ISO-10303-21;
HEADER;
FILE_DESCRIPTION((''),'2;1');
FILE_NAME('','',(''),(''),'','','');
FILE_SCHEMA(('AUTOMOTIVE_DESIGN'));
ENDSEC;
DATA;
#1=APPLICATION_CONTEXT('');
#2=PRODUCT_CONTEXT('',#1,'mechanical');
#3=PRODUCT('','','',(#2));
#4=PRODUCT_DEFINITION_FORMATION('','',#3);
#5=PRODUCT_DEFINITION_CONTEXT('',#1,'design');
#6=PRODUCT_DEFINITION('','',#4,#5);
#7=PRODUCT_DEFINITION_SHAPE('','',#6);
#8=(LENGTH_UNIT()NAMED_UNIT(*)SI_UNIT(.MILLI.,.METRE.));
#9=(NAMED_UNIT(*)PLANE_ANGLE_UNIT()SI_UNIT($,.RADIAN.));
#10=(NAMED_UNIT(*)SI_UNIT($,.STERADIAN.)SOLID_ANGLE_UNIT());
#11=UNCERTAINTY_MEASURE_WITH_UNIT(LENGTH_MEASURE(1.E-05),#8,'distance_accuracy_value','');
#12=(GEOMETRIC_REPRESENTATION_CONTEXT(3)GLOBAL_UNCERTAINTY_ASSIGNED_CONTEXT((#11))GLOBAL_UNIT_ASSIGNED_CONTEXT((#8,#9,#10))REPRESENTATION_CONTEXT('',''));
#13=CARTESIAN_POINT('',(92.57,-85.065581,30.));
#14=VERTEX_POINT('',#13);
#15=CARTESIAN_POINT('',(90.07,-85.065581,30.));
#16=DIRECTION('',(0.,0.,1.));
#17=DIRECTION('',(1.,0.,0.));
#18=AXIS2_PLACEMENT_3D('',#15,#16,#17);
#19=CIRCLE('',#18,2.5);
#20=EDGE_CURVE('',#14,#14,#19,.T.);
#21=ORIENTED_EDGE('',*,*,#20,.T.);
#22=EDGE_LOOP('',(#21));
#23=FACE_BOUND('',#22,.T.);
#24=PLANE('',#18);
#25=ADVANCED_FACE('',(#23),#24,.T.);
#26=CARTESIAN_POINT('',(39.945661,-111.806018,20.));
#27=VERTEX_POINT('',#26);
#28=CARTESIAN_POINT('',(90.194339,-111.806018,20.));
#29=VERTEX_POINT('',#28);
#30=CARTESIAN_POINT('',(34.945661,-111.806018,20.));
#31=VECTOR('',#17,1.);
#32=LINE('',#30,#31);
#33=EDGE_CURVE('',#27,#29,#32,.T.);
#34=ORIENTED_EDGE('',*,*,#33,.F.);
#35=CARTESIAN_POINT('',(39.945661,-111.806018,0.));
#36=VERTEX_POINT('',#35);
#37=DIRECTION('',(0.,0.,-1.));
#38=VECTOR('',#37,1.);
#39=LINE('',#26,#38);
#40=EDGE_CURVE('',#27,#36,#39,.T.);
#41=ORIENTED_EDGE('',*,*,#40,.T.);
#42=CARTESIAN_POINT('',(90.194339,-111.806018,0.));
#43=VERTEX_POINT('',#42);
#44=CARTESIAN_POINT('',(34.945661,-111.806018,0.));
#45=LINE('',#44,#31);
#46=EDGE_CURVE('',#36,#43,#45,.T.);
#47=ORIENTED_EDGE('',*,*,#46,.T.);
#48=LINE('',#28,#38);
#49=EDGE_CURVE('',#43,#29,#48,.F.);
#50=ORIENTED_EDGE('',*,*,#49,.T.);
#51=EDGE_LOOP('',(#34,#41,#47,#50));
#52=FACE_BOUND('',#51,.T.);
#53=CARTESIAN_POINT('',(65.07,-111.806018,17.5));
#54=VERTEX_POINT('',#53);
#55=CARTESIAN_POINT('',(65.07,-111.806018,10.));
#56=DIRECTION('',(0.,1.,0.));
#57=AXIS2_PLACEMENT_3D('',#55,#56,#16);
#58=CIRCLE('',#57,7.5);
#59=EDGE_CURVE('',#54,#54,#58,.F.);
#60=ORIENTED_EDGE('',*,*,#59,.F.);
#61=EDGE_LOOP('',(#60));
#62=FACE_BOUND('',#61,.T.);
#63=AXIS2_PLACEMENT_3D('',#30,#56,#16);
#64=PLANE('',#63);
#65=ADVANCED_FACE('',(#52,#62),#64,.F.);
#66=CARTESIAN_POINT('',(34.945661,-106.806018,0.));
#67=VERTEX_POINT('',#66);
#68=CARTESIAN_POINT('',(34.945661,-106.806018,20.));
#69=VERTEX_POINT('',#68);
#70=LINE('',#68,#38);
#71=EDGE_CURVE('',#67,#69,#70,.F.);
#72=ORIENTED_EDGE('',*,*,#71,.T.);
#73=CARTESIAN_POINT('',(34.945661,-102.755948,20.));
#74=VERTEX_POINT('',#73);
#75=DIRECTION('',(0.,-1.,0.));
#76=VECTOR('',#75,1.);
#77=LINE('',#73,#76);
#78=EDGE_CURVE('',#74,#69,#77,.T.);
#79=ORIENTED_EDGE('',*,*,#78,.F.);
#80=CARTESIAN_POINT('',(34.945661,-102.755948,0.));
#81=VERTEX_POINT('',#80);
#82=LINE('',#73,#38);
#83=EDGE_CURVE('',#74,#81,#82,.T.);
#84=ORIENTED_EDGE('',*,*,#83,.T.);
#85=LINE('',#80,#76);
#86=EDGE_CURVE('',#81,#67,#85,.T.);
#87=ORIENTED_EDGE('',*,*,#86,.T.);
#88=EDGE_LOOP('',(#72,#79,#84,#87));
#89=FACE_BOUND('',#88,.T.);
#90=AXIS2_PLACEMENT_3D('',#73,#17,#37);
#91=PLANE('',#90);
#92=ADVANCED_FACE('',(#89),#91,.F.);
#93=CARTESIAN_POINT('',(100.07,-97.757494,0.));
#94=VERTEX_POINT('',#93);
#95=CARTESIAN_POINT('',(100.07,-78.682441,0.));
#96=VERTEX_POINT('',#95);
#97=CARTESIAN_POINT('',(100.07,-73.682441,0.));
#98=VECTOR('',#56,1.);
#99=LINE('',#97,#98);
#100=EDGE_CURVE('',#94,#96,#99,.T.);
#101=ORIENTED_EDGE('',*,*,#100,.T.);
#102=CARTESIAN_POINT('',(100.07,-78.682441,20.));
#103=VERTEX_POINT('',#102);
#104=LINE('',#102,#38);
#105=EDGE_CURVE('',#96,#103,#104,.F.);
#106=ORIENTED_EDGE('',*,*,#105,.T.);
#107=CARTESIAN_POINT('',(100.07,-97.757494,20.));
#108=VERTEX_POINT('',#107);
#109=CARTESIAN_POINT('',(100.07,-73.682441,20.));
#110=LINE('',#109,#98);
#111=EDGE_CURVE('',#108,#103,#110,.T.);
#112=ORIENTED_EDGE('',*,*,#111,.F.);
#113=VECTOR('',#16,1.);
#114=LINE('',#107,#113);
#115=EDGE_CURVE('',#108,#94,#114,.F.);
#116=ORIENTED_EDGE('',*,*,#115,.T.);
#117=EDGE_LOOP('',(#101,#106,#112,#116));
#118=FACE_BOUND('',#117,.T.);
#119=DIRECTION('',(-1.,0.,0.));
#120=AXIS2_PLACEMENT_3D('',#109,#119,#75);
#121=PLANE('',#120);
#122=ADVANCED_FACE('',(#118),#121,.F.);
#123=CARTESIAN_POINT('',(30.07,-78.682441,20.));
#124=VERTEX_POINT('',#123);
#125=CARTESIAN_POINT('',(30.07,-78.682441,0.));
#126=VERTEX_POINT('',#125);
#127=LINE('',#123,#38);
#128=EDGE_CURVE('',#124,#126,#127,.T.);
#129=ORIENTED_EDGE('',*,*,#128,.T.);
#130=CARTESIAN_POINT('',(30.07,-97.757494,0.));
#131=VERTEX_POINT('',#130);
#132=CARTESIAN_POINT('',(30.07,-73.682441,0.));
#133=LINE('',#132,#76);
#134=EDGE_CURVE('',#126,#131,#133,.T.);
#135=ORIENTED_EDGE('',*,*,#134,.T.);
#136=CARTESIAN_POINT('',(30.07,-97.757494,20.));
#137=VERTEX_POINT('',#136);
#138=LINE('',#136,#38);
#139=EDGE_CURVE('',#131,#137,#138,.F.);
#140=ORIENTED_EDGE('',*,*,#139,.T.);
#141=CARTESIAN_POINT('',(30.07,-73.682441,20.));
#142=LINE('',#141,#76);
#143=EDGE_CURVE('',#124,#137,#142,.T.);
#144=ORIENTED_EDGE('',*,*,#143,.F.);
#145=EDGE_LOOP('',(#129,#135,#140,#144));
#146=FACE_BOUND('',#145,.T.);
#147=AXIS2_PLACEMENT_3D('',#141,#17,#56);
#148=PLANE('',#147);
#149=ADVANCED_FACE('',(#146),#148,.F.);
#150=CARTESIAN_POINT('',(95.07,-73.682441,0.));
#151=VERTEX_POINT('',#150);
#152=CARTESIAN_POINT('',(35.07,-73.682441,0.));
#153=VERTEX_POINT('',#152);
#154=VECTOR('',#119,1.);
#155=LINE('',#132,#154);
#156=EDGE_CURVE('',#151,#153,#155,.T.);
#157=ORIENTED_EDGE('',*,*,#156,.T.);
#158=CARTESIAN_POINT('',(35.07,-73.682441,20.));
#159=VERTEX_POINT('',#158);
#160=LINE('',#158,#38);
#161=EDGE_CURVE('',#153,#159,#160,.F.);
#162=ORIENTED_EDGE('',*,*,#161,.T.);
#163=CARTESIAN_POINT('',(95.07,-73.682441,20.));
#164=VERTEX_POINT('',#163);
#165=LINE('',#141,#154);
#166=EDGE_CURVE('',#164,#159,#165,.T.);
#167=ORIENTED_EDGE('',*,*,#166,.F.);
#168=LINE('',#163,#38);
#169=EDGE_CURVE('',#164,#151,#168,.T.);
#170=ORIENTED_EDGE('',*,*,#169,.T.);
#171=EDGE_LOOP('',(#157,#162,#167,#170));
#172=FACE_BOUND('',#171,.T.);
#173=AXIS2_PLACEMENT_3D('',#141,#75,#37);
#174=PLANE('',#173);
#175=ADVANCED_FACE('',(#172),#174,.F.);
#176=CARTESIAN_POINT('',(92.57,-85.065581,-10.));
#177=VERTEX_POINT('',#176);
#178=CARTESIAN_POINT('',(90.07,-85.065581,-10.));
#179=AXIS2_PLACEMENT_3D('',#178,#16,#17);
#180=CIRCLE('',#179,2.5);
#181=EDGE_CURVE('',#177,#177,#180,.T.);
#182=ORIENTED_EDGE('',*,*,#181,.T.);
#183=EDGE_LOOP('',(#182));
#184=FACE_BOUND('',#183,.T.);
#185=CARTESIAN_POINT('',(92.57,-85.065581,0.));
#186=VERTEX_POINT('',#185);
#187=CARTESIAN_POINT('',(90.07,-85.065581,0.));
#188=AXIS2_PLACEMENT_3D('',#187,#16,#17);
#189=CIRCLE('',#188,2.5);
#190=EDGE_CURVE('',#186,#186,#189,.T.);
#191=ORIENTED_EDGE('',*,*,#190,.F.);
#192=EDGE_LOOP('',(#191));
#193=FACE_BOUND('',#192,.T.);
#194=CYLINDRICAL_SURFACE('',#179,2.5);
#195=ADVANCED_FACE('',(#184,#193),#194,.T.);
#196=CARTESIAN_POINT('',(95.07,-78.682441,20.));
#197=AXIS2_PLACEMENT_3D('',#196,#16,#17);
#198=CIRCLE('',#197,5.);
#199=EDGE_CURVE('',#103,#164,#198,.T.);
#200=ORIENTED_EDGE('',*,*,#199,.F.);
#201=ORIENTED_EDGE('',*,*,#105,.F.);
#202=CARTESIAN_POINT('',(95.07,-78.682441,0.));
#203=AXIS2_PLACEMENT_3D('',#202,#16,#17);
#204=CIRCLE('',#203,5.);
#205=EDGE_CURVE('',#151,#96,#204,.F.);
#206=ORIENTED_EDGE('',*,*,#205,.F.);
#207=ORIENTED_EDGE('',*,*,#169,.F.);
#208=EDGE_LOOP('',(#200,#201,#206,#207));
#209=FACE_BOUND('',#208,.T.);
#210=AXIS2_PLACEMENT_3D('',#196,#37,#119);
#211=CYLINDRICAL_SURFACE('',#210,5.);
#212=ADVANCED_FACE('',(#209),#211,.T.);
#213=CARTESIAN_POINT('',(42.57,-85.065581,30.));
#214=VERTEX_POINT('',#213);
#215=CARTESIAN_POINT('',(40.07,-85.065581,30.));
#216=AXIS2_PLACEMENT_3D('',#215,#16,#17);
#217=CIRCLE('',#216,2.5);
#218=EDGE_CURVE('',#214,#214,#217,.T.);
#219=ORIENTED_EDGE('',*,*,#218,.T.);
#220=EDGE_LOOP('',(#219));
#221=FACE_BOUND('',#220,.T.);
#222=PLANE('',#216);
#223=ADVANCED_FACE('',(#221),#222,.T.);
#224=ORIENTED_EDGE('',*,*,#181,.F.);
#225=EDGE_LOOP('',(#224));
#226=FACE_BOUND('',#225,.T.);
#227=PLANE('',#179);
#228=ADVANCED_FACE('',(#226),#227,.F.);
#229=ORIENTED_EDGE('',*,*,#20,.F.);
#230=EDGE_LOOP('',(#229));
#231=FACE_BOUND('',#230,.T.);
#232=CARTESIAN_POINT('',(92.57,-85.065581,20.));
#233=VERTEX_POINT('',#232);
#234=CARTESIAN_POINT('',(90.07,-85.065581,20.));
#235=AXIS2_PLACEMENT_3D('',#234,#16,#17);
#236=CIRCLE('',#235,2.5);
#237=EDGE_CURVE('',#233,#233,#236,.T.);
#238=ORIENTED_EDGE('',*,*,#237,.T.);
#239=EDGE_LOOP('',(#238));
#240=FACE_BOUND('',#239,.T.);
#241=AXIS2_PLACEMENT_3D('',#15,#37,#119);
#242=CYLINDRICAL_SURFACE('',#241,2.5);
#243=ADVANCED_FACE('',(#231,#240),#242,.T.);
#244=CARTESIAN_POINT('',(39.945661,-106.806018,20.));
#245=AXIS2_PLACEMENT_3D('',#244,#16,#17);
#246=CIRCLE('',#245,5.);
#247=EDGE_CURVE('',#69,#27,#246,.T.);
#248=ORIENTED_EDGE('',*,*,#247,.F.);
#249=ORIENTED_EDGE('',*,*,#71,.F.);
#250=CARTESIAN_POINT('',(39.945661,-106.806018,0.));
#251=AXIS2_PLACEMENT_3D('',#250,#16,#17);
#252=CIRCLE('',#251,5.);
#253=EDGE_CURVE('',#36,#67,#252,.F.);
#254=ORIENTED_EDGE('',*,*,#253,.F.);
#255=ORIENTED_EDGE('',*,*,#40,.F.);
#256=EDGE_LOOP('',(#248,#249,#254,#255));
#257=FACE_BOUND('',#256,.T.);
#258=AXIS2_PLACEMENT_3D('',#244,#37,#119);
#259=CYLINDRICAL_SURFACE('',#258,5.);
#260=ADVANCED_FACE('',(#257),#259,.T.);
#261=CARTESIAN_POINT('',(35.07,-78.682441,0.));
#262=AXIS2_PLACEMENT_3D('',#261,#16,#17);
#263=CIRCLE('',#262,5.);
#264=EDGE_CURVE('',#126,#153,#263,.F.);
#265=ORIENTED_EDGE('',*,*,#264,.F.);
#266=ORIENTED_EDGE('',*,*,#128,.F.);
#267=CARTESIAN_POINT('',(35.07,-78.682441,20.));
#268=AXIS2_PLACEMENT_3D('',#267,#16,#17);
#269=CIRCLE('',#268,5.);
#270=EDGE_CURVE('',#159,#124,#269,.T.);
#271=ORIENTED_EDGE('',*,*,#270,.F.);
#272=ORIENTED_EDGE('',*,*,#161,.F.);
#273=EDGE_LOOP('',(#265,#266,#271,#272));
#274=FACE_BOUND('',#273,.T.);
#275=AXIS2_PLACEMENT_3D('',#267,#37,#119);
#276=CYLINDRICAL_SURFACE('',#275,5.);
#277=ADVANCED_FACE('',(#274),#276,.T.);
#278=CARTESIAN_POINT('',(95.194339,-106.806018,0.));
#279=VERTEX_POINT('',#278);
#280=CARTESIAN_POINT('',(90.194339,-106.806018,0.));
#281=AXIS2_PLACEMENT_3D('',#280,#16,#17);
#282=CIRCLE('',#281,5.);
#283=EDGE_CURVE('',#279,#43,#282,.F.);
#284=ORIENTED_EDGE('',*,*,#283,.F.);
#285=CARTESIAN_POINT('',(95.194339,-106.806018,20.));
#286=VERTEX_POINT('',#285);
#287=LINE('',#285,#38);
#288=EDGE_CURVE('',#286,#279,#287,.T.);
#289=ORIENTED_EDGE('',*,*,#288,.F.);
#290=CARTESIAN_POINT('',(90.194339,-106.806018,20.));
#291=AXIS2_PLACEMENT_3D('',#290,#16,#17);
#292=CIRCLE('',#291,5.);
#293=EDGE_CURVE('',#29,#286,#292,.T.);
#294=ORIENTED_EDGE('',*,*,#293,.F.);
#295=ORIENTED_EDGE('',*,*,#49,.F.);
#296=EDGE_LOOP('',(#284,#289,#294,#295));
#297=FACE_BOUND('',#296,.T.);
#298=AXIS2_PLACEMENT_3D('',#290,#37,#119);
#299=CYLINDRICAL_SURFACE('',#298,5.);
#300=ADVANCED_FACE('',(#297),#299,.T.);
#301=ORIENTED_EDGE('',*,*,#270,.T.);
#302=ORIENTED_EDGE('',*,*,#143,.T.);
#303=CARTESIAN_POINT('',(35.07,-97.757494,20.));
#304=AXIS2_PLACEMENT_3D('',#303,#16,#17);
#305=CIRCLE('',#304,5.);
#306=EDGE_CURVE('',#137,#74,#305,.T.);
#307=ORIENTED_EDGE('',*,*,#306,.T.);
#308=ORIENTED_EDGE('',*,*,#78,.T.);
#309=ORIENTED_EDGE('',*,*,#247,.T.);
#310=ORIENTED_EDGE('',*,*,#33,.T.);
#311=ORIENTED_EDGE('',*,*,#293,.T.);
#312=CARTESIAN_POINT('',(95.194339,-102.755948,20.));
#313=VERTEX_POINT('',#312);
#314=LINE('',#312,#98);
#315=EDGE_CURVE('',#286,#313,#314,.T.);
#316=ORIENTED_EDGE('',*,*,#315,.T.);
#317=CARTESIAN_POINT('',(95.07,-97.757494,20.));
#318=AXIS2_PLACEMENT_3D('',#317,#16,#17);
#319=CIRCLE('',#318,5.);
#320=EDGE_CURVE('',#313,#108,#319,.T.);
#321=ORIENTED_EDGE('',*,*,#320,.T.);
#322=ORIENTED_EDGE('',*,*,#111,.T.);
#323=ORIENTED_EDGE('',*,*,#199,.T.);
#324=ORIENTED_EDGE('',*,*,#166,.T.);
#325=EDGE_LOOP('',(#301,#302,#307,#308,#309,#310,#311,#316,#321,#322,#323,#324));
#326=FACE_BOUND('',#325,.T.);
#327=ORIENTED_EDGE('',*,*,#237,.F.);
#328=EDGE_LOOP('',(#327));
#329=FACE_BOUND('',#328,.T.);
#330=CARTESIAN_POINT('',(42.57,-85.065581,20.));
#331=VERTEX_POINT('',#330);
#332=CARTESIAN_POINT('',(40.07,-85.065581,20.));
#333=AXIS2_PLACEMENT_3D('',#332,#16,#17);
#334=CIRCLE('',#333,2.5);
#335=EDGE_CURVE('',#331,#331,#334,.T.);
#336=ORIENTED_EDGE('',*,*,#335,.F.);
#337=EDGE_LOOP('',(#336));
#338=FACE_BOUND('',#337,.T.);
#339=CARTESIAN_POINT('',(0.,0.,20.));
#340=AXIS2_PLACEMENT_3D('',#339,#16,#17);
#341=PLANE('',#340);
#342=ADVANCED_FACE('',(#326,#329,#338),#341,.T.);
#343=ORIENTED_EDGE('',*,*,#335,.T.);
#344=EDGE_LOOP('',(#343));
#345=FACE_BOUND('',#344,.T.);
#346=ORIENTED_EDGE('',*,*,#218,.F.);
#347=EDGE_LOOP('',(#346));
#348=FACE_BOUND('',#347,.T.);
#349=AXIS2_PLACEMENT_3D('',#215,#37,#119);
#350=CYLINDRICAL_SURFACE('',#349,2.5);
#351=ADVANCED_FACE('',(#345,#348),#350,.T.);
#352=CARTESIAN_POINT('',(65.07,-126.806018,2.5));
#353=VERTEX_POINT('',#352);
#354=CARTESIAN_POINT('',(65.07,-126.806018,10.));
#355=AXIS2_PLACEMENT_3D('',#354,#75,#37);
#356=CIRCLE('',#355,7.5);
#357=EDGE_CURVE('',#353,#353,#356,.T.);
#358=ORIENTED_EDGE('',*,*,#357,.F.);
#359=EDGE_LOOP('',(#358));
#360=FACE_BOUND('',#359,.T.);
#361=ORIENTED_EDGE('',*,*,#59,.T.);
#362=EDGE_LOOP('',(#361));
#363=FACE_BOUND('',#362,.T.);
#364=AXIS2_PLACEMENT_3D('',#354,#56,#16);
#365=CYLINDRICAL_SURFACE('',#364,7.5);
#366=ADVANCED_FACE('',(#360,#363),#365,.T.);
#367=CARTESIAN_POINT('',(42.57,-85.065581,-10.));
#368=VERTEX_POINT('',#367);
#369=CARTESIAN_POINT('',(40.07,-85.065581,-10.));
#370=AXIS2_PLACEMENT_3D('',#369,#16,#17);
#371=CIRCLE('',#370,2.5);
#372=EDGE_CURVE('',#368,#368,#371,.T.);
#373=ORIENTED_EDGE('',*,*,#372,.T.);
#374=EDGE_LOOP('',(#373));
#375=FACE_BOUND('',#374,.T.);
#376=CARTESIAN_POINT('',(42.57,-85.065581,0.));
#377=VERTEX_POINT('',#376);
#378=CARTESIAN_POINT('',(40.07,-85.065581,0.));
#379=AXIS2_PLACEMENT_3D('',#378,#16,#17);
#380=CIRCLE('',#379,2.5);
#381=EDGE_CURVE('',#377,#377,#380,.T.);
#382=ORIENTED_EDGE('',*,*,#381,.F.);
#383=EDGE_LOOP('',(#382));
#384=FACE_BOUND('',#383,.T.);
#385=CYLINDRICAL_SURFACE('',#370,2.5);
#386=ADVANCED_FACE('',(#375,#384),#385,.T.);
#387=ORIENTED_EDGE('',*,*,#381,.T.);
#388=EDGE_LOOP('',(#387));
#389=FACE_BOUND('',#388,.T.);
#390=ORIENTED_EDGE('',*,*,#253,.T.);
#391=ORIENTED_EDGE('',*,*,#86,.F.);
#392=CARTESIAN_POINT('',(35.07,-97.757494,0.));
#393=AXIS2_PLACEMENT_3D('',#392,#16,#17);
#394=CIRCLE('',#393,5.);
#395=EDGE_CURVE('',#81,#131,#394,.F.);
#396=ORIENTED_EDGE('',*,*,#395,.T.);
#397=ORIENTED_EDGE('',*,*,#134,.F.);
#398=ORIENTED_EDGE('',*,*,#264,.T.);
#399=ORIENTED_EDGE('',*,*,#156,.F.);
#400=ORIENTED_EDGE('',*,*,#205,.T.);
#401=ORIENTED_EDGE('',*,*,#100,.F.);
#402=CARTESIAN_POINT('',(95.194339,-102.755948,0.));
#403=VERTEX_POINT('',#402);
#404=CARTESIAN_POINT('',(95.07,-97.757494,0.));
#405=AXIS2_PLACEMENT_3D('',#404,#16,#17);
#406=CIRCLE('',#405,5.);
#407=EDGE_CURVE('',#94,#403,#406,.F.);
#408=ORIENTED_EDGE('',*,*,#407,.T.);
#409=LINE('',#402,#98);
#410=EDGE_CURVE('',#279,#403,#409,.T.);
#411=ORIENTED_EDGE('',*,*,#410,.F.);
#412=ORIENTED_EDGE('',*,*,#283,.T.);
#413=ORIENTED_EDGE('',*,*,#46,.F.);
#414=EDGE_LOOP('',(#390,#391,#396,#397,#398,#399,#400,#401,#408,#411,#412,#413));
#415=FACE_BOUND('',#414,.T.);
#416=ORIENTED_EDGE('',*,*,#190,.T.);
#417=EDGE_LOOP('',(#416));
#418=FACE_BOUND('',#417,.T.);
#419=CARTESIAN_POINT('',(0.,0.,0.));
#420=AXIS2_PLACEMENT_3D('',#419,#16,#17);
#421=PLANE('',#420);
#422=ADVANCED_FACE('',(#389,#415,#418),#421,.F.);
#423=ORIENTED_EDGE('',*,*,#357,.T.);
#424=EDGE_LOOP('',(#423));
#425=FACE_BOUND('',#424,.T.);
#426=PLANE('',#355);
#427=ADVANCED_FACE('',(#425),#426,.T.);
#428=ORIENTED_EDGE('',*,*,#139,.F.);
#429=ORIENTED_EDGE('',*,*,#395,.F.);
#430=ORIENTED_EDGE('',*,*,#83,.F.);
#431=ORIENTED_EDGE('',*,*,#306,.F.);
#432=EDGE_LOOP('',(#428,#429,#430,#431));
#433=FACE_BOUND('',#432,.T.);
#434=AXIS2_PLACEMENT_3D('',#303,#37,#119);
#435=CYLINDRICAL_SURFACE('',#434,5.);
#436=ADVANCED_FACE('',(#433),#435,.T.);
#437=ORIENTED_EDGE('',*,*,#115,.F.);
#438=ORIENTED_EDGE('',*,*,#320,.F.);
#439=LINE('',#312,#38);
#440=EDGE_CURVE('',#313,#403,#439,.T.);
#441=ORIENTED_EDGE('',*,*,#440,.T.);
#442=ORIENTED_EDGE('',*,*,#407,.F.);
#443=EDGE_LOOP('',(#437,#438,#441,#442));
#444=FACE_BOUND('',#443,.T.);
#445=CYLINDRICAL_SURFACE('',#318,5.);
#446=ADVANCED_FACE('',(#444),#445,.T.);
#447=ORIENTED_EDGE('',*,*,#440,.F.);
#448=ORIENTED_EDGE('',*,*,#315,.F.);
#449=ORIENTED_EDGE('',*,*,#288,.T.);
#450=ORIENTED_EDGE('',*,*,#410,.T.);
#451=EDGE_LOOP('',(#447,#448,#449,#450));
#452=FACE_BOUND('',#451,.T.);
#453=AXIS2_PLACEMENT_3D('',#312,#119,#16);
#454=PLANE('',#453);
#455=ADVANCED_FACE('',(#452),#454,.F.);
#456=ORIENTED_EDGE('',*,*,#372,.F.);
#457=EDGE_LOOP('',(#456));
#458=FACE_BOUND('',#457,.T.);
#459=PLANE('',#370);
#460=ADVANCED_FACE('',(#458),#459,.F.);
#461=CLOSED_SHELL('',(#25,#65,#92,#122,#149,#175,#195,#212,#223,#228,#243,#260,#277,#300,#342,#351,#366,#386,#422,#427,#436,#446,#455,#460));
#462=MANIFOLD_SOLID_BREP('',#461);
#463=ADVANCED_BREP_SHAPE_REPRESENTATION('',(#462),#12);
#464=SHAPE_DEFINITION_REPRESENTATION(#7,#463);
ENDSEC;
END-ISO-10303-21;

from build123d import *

# Parameters (mm, degrees)
SKETCH1_R             = 2.5
BOSS_EXTRUDE1_DEPTH   = 10
BOSS_EXTRUDE1_2_DEPTH = 10
BOSS_EXTRUDE2_DEPTH   = 20
FILLET1_R             = 5
SKETCH4_R             = 7.5
BOSS_EXTRUDE3_DEPTH   = 15
BOSS_EXTRUDE4_START   = 10
SKETCH5_R             = 2.5
BOSS_EXTRUDE4_DEPTH   = 10


with BuildPart() as part:
    # Sketch1 → Boss-Extrude1 (new body)
    with BuildSketch(Plane.XY):
        with Locations((90.07, -85.065581077)):
            Circle(SKETCH1_R)
    extrude(amount=-BOSS_EXTRUDE1_DEPTH)



with BuildPart() as body_2:
    # Sketch1 → Boss-Extrude1 2 (new body)
    with BuildSketch(Plane.XY):
        with Locations((40.07, -85.065581077)):
            Circle(SKETCH1_R)
    extrude(amount=-BOSS_EXTRUDE1_2_DEPTH)


with BuildPart() as part_1:
    add(part.part)

    add(body_2.part)  # Boss-Extrude2 merges body 2
    # Sketch2 → Boss-Extrude2 (add)
    with BuildSketch(Plane.XY):
        Polygon((30.07, -73.682440954), (100.07, -73.682440954), (100.07, -102.755947539), (95.194338838, -102.755947539), (95.194338838, -111.806017714), (34.945661162, -111.806017714), (34.945661162, -102.755947539), (30.07, -102.755947539), align=None)
    extrude(amount=BOSS_EXTRUDE2_DEPTH)

    # Fillet1
    # the kernel refuses this fillet: 5 mm, written as the material it takes off along each edge
    with BuildSketch(Plane(origin=(100.07, -73.682440954, -12.5), x_dir=(-1, 0, 0), z_dir=(0, 0, 1)), Plane(origin=(95.194338838, -111.806017714, -12.5), x_dir=(0, 1, 0), z_dir=(0, 0, 1))) as fillet1_piece_1:
        with BuildLine():
            CenterArc((FILLET1_R, FILLET1_R), FILLET1_R, 180, 90)
            Line((0, FILLET1_R), (-FILLET1_R * 0.02, FILLET1_R))
            Line((-FILLET1_R * 0.02, FILLET1_R), (-FILLET1_R * 0.02, -FILLET1_R * 0.02))
            Line((-FILLET1_R * 0.02, -FILLET1_R * 0.02), (FILLET1_R, -FILLET1_R * 0.02))
            Line((FILLET1_R, -FILLET1_R * 0.02), (FILLET1_R, 0))
        make_face()
    extrude(amount=45, mode=Mode.SUBTRACT)
    with BuildSketch(Plane(origin=(100.07, -102.755947539, -12.496134366), x_dir=(0, 1, 0), z_dir=(0, 0, 1))) as fillet1_piece_2:
        with BuildLine():
            CenterArc((4.998453746, 5), FILLET1_R, 181.424965019, 88.575034981)
            Line((0, 4.875661162), (-0.099969075, 4.873174386))
            ThreePointArc((-0.099969075, 4.873174386), (-0.1, 2.437830581), (-0.1, 0))
            Line((-0.1, 0), (0, -0.1))
            Line((0, -0.1), (4.998453746, -0.1))
            Line((4.998453746, -0.1), (4.998453746, 0))
        make_face()
    extrude(amount=44.992268731, mode=Mode.SUBTRACT)
    with BuildSketch(Plane(origin=(34.945661162, -111.806017714, -12.5), x_dir=(0, 1, 0), z_dir=(0, 0, 1)), Plane(origin=(30.07, -73.682440954, -12.5), x_dir=(1, 0, 0), z_dir=(0, 0, 1))) as fillet1_piece_3:
        with BuildLine():
            CenterArc((FILLET1_R, -FILLET1_R), FILLET1_R, 90, 90)
            Line((0, -FILLET1_R), (-FILLET1_R * 0.02, -FILLET1_R))
            Line((-FILLET1_R * 0.02, -FILLET1_R), (-FILLET1_R * 0.02, FILLET1_R * 0.02))
            Line((-FILLET1_R * 0.02, FILLET1_R * 0.02), (FILLET1_R, FILLET1_R * 0.02))
            Line((FILLET1_R, FILLET1_R * 0.02), (FILLET1_R, 0))
        make_face()
    extrude(amount=45, mode=Mode.SUBTRACT)
    with BuildSketch(Plane(origin=(30.07, -102.755947539, -12.496134366), x_dir=(0, 1, 0), z_dir=(0, 0, 1))) as fillet1_piece_4:
        with BuildLine():
            CenterArc((4.998453746, -5), FILLET1_R, 90, 88.575034981)
            Line((0, -4.875661162), (-0.099969075, -4.873174386))
            ThreePointArc((-0.099969075, -4.873174386), (-0.1, -2.437830581), (-0.1, 0))
            Line((-0.1, 0), (0, 0.1))
            Line((0, 0.1), (4.998453746, 0.1))
            Line((4.998453746, 0.1), (4.998453746, 0))
        make_face()
    extrude(amount=44.992268731, mode=Mode.SUBTRACT)

    # Sketch4 → Boss-Extrude3 (add)
    with BuildSketch(Plane.XZ.offset(111.806017714)):
        with Locations(Location((65.07, 10, 0), (0, 0, 90))):
            Circle(SKETCH4_R)
    extrude(amount=BOSS_EXTRUDE3_DEPTH)

    # Sketch5 → Boss-Extrude4 (add)
    with BuildSketch(Plane.XY.offset(20).offset(BOSS_EXTRUDE4_START)):
        with Locations((90.07, -85.065581077)):
            Circle(SKETCH5_R)
        with Locations((40.07, -85.065581077)):
            Circle(SKETCH5_R)
    extrude(amount=-BOSS_EXTRUDE4_DEPTH)


solid = part_1.part
